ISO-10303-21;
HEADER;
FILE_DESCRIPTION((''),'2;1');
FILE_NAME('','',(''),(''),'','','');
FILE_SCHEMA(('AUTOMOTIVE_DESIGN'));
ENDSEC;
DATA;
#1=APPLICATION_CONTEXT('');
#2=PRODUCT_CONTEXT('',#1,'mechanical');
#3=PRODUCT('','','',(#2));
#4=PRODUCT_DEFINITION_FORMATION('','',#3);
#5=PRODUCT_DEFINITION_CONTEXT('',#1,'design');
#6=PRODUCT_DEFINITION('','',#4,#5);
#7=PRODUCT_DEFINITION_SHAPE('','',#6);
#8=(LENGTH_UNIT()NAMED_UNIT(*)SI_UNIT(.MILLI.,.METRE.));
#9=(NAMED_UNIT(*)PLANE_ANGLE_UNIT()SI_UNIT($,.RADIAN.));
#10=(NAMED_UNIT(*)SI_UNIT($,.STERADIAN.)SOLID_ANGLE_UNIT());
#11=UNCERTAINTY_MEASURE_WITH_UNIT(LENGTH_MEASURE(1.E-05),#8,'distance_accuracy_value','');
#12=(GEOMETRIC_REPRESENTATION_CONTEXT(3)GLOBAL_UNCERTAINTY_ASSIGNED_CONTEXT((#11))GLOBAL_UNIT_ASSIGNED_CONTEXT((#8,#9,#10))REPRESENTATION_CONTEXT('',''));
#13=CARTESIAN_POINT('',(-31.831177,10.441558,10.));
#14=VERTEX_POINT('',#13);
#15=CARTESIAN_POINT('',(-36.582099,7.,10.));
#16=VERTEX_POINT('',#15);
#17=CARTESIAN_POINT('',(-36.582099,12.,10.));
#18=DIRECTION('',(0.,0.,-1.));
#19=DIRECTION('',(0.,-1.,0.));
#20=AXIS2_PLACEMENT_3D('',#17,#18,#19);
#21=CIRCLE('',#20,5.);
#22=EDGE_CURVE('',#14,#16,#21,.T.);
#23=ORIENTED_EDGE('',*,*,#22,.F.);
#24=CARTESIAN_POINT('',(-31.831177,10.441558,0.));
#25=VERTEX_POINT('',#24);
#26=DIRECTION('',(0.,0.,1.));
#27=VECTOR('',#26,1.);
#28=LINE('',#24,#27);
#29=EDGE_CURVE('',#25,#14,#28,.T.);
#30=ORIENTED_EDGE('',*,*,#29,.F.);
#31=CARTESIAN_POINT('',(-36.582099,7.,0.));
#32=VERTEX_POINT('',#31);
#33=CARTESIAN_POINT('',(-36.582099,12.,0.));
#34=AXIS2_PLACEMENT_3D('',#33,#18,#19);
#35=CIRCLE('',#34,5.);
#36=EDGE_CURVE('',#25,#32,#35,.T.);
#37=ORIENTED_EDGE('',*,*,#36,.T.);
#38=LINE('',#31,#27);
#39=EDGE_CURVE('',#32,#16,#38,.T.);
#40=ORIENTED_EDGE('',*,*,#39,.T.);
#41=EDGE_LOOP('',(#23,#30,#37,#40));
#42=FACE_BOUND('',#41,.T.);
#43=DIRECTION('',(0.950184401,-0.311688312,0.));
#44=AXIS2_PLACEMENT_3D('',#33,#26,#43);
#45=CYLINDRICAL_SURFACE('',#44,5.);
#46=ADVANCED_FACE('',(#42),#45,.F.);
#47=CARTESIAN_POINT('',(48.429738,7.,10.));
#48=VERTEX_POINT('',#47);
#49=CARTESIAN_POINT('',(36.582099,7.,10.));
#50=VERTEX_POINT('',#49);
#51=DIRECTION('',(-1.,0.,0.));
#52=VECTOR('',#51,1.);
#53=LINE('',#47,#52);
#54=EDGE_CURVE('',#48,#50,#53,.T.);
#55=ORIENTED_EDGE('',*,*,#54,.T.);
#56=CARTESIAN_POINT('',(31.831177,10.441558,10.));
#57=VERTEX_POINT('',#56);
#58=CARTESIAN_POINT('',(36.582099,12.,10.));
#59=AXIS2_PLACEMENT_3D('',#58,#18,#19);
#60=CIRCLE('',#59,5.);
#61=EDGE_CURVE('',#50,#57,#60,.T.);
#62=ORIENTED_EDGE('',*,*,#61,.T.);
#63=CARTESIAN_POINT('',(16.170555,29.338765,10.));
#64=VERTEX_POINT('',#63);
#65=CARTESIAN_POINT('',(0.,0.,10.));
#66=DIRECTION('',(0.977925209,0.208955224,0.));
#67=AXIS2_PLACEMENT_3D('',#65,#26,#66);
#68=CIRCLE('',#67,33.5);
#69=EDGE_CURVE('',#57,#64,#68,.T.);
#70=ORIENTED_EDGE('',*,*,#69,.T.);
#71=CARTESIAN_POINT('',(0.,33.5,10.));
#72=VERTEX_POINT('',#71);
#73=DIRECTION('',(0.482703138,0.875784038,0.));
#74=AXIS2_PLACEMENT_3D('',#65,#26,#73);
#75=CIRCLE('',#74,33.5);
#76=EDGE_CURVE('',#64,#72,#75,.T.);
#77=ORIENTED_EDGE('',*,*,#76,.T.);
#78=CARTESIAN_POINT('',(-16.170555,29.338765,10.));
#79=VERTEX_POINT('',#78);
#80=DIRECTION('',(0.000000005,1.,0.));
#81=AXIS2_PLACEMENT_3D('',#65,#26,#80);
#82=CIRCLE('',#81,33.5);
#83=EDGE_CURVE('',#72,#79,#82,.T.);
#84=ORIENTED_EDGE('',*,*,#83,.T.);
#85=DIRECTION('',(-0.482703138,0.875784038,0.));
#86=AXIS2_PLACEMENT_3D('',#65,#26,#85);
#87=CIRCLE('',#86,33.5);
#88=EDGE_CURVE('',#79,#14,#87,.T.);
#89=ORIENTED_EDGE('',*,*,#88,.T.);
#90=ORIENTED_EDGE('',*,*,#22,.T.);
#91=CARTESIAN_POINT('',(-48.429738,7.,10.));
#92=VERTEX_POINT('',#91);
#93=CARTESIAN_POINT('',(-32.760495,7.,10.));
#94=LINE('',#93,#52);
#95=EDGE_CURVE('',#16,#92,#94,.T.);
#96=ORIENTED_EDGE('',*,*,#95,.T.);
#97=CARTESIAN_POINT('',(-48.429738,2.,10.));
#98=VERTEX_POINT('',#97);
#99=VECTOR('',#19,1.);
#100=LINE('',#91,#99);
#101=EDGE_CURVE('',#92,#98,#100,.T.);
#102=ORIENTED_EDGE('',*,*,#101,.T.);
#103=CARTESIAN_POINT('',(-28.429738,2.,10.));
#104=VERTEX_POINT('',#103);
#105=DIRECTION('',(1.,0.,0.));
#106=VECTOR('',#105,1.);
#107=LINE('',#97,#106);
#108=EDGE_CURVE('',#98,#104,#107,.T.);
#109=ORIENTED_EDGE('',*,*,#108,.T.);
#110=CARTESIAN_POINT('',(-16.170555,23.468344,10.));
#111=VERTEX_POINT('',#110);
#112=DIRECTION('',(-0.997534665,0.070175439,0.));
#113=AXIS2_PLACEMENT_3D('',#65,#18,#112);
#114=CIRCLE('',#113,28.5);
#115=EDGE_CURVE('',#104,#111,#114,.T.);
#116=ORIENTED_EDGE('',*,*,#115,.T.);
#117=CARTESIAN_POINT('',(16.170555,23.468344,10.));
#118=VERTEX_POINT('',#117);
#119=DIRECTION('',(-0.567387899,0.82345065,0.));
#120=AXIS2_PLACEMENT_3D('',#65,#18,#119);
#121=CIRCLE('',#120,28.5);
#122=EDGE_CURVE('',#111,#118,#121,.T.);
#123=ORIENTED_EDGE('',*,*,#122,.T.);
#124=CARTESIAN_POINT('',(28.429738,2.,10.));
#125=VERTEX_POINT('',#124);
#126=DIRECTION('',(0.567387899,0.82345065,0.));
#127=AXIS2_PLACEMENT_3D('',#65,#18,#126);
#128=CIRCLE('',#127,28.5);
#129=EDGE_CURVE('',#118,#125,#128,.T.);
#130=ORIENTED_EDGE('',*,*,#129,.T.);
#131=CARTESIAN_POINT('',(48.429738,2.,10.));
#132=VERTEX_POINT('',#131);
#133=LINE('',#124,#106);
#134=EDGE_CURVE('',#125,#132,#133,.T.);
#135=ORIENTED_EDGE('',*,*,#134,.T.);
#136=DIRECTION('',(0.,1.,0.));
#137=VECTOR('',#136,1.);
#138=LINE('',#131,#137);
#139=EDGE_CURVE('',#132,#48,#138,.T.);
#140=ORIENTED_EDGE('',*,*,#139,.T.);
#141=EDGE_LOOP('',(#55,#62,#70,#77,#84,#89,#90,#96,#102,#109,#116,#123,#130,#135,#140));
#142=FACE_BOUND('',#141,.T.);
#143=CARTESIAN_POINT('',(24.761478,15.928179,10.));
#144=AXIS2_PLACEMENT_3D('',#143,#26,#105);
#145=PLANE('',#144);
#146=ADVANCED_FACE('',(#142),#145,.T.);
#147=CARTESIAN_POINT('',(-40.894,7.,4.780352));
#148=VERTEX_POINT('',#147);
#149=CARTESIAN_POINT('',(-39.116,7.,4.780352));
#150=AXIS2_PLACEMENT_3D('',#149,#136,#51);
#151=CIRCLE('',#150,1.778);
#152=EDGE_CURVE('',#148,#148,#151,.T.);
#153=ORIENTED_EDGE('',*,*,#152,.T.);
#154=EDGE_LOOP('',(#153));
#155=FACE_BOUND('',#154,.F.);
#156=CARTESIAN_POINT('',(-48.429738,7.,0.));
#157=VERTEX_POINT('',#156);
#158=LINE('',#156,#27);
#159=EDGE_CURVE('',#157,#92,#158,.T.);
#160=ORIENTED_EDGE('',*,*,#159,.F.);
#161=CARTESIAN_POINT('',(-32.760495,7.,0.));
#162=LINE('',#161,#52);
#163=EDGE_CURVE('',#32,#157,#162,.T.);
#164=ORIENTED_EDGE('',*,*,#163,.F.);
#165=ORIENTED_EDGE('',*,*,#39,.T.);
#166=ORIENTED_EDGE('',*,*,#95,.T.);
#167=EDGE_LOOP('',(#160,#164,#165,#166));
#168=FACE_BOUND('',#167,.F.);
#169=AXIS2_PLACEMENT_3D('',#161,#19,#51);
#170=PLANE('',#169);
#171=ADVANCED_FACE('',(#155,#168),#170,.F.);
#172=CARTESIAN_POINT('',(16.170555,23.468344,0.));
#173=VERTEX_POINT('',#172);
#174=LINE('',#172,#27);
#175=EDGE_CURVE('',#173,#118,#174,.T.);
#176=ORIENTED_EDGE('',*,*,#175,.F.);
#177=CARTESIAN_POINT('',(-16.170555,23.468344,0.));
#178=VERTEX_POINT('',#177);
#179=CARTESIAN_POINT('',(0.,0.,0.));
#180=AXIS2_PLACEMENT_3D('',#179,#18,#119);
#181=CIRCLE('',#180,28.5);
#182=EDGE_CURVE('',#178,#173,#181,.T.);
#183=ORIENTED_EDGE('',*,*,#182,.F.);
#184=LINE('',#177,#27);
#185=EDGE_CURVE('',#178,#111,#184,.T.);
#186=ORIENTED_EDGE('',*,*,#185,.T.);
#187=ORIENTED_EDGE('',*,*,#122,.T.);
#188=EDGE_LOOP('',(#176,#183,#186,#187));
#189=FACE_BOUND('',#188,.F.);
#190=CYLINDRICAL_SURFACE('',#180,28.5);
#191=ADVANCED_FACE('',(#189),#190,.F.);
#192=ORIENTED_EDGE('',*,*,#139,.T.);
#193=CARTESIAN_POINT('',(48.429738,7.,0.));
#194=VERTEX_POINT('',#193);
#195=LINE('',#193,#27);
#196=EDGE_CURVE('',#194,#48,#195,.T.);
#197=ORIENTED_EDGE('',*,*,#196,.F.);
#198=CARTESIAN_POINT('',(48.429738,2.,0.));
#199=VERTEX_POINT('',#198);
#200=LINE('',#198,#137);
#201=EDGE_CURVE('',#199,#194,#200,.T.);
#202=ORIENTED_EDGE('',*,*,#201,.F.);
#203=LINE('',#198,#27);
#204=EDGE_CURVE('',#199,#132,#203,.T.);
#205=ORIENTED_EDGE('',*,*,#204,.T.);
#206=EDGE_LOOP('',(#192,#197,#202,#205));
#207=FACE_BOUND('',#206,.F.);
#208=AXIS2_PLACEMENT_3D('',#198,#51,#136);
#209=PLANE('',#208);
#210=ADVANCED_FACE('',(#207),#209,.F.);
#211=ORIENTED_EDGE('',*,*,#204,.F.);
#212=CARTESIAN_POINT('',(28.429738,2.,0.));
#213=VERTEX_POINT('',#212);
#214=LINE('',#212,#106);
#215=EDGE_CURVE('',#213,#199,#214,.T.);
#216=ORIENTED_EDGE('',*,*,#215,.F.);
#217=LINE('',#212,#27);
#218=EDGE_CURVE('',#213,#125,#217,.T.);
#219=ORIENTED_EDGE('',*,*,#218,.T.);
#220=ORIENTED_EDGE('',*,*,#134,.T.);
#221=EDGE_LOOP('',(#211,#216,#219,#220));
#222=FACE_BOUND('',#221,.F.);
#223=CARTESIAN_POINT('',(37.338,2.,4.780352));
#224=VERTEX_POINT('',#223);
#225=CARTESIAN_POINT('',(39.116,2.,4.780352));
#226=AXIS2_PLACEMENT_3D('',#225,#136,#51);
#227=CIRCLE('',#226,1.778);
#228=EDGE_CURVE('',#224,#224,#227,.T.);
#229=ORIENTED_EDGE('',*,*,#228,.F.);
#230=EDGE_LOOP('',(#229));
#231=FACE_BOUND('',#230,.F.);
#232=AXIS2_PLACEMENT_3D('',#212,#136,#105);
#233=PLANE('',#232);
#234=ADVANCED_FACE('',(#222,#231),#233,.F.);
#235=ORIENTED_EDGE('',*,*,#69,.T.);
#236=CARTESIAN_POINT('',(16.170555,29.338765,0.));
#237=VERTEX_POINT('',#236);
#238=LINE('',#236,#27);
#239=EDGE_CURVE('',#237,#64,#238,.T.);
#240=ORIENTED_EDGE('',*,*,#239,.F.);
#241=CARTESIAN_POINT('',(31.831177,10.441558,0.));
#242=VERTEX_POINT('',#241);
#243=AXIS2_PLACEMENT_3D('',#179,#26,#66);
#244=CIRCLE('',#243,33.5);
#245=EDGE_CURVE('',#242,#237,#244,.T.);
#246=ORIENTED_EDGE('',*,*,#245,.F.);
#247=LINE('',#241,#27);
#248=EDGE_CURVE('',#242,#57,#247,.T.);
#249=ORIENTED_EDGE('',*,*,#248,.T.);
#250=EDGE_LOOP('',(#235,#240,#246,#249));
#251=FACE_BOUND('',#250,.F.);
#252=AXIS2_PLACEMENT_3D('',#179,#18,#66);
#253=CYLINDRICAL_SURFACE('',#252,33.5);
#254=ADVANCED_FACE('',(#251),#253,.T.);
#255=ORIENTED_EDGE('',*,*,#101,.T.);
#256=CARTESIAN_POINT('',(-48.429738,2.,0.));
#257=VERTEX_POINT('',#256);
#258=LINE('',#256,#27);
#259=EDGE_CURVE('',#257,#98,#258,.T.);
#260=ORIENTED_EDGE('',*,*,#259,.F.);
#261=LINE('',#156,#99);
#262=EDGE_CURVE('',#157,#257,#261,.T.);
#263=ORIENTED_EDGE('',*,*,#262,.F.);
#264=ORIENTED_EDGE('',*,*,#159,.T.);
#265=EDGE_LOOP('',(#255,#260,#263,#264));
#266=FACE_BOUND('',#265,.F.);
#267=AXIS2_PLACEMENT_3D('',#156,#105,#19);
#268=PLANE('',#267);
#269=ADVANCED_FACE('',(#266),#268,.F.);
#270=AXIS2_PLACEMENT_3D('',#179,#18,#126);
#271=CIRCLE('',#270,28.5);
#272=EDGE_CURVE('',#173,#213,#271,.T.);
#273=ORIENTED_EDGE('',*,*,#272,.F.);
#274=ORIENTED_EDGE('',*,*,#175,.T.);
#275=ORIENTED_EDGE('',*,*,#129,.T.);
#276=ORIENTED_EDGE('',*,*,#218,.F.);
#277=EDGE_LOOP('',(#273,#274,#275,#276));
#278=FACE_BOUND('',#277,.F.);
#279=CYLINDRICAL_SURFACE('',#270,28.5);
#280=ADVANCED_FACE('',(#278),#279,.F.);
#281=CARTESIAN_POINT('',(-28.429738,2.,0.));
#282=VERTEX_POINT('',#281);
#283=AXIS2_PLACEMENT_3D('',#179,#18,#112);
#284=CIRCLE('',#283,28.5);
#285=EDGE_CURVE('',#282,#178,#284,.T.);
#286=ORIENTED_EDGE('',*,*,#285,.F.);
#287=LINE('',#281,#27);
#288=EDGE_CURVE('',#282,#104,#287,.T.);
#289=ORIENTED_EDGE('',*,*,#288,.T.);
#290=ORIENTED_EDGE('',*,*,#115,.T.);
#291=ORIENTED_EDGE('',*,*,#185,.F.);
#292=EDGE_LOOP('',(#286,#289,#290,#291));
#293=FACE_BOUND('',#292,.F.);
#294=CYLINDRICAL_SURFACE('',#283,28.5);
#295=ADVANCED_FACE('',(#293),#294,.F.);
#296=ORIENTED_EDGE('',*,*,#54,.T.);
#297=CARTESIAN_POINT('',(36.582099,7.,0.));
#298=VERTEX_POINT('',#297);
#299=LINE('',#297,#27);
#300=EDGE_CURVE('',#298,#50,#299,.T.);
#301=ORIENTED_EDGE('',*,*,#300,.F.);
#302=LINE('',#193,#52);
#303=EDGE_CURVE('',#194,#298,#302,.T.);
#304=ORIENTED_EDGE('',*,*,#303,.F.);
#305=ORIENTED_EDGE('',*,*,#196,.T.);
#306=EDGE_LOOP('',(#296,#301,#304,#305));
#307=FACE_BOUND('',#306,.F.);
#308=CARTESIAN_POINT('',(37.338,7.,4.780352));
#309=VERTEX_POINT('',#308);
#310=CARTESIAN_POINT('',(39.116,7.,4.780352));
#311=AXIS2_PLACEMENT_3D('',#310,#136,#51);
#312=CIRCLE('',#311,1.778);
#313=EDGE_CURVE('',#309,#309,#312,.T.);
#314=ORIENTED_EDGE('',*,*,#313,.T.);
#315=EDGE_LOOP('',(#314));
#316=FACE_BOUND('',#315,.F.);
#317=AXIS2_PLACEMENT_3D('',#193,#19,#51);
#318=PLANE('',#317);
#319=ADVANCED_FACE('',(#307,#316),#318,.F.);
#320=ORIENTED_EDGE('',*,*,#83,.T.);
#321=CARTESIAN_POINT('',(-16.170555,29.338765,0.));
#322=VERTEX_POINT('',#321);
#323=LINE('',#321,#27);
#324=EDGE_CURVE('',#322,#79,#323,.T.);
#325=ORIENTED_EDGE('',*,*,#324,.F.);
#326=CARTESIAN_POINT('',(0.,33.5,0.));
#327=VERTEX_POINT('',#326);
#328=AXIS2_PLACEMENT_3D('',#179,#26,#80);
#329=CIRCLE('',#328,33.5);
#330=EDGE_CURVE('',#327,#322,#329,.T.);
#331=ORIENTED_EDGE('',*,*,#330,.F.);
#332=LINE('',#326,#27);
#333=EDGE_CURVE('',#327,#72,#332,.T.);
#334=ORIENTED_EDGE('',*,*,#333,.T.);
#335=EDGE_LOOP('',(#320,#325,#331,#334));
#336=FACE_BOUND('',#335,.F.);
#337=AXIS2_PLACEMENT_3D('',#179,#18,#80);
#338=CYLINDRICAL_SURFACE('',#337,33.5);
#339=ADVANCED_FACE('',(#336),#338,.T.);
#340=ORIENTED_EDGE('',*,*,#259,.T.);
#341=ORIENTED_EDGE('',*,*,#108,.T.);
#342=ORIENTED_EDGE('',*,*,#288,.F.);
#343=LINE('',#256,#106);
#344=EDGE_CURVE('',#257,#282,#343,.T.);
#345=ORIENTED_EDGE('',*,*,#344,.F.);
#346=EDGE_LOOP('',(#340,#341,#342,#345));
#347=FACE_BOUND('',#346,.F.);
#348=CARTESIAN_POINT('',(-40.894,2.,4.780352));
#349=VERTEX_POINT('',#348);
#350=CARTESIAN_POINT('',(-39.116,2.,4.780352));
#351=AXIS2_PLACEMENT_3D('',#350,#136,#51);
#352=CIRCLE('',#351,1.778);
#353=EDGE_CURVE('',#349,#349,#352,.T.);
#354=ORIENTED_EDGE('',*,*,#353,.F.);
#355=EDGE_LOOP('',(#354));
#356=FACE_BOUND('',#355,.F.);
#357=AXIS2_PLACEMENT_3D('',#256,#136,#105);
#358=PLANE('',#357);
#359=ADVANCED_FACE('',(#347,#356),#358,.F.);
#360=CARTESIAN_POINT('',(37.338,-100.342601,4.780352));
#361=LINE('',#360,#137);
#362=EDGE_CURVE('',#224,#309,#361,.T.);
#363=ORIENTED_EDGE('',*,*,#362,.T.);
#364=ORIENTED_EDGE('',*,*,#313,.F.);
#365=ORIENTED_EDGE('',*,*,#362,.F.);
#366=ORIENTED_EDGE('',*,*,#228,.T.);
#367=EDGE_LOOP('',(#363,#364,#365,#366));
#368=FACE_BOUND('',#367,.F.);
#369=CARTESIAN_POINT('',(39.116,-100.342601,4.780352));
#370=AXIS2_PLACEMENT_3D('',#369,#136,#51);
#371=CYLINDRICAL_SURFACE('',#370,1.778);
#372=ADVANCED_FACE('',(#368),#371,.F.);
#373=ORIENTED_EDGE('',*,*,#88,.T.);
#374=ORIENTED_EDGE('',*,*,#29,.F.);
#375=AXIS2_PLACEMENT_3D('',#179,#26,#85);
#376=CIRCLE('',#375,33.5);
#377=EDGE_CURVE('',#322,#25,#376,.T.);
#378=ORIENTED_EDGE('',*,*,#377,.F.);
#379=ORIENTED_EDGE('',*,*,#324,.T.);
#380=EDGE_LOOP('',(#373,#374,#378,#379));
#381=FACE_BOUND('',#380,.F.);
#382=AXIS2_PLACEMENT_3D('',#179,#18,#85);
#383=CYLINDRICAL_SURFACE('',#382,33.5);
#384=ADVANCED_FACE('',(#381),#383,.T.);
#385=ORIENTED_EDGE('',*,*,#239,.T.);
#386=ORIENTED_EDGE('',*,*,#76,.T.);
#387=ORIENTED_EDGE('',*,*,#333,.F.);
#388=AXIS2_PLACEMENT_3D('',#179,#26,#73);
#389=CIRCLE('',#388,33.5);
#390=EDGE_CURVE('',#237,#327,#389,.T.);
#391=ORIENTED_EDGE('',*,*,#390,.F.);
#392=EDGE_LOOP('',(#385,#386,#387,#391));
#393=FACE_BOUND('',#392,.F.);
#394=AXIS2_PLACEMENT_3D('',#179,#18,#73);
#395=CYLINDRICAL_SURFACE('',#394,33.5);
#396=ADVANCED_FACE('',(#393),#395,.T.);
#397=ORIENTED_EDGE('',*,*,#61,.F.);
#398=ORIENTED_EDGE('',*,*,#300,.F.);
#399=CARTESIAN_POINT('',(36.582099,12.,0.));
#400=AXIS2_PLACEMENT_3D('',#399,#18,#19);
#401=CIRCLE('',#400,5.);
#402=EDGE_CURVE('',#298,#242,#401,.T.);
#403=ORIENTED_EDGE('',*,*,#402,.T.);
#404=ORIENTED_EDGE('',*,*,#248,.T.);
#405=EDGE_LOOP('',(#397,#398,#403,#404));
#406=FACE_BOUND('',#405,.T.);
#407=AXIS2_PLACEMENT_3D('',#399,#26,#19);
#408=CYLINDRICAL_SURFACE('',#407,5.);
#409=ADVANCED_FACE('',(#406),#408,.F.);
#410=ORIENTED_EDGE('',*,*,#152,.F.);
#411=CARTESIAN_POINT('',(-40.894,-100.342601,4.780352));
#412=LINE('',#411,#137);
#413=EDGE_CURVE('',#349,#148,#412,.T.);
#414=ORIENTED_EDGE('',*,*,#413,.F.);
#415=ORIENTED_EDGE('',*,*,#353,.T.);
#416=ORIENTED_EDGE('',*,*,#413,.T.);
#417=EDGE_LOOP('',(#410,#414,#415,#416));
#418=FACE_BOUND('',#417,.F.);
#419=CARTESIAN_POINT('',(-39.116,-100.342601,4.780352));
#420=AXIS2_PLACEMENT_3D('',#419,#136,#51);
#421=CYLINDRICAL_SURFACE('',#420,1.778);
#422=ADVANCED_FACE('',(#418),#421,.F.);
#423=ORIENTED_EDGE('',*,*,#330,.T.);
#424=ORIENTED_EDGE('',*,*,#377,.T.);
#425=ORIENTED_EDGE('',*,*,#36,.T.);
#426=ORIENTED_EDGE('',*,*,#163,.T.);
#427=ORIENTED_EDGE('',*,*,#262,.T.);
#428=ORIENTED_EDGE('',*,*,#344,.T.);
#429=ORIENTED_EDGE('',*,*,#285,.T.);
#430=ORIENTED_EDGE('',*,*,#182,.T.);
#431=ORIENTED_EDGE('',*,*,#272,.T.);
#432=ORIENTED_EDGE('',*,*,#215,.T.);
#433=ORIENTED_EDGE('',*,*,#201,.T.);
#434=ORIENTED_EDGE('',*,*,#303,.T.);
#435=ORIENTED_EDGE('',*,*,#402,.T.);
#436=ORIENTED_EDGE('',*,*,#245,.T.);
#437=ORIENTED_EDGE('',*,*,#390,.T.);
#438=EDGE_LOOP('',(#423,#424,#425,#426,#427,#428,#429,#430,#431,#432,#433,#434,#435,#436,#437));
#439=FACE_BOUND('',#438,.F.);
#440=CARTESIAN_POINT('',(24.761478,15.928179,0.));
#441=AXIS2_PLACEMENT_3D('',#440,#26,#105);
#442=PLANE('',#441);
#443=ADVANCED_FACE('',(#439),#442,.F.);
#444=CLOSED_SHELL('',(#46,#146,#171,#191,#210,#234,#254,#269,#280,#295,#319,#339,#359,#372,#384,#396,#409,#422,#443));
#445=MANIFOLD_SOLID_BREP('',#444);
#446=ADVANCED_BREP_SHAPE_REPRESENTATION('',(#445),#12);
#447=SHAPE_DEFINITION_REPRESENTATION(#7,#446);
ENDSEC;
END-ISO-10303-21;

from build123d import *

# Parameters (mm, degrees)
F1_DEPTH = 10
F4_DEPTH = 10.001
F6_D     = 3.556
F7_R     = 5


# Not quite as in the source:
# - a feature of the source that left no trace in its solid (it failed there, or was rolled back) is left out
# - a feature names something its author has since deleted; it is built from what else it names


with BuildPart() as f1:
    # F0 (on Top) → F1 (new body)
    with BuildSketch(Plane.XY):
        with BuildLine():
            ThreePointArc((16.1705551086, 23.468343518), (24.7491207645, 14.1326225939), (28.4297379517, 2))
            Line((28.4297379517, 2), (28.4297379517, 7))
            Line((28.4297379517, 7), (32.7604945018, 7))
            ThreePointArc((32.7604945018, 7), (26.8945535829, 19.9733068763), (16.1705551086, 29.3387652685))
            Line((16.1705551086, 29.3387652685), (16.1705551086, 23.468343518))
        make_face()
        with BuildLine():
            ThreePointArc((-16.1705551086, 23.468343518), (0, 28.5), (16.1705551086, 23.468343518))
            Line((16.1705551086, 23.468343518), (16.1705551086, 29.3387652685))
            Line((16.1705551086, 29.3387652685), (-16.1705551086, 29.3387652685))
            Line((-16.1705551086, 29.3387652685), (-16.1705551086, 23.468343518))
        make_face()
        with BuildLine():
            ThreePointArc((-28.4297379517, 2), (-24.7491207645, 14.1326225939), (-16.1705551086, 23.468343518))
            Line((-16.1705551086, 23.468343518), (-16.1705551086, 29.3387652685))
            ThreePointArc((-16.1705551086, 29.3387652685), (-26.8945535829, 19.9733068763), (-32.7604945018, 7))
            Line((-32.7604945018, 7), (-28.4297379517, 7))
            Line((-28.4297379517, 7), (-28.4297379517, 2))
        make_face()
        with BuildLine():
            Line((-48.4297379517, 2), (-33.4402452144, 2))
            ThreePointArc((-33.4402452144, 2), (-33.1946454228, 4.5128167765), (-32.7604945018, 7))
            Line((-32.7604945018, 7), (-48.4297379517, 7))
            Line((-48.4297379517, 7), (-48.4297379517, 2))
        make_face()
        with BuildLine():
            Line((-33.4402452144, 2), (-28.4297379517, 2))
            Line((-28.4297379517, 2), (-28.4297379517, 7))
            Line((-28.4297379517, 7), (-32.7604945018, 7))
            ThreePointArc((-32.7604945018, 7), (-33.1946454228, 4.5128167765), (-33.4402452144, 2))
        make_face()
        with BuildLine():
            Line((28.4297379517, 7), (28.4297379517, 2))
            Line((28.4297379517, 2), (33.4402452144, 2))
            ThreePointArc((33.4402452144, 2), (33.1946454228, 4.5128167765), (32.7604945018, 7))
            Line((32.7604945018, 7), (28.4297379517, 7))
        make_face()
        with BuildLine():
            ThreePointArc((32.7604945018, 7), (33.1946454228, 4.5128167765), (33.4402452144, 2))
            Line((33.4402452144, 2), (48.4297379517, 2))
            Line((48.4297379517, 2), (48.4297379517, 7))
            Line((48.4297379517, 7), (32.7604945018, 7))
        make_face()
        with BuildLine():
            Line((-16.1705551086, 29.3387652685), (16.1705551086, 29.3387652685))
            ThreePointArc((16.1705551086, 29.3387652685), (8.3486935036, 32.4430164563), (1.811e-07, 33.5))
            ThreePointArc((1.811e-07, 33.5), (-8.3486933282, 32.4430165014), (-16.1705551086, 29.3387652685))
        make_face()
    extrude(amount=F1_DEPTH)

    # F0 (on Top) → F4 (cut, through all)
    with BuildSketch(Plane.XY):
        with BuildLine():
            Line((-16.1705551086, 23.468343518), (16.1705551086, 23.468343518))
            ThreePointArc((16.1705551086, 23.468343518), (0, 28.5), (-16.1705551086, 23.468343518))
        make_face()
    extrude(amount=F4_DEPTH, mode=Mode.SUBTRACT)

    # F6 (through all)
    with Locations(Plane.XZ.offset(-2)):
        with Locations((-39.116, 4.78035165), (39.116, 4.78035165)):
            Hole(F6_D / 2)

    # F7
    f7_edges = [f1.edges().sort_by_distance(p)[0] for p in [
        (-32.760495, 7, 5),
        (32.760495, 7, 5),
    ]]
    fillet(f7_edges, radius=F7_R)


solid = f1.part
